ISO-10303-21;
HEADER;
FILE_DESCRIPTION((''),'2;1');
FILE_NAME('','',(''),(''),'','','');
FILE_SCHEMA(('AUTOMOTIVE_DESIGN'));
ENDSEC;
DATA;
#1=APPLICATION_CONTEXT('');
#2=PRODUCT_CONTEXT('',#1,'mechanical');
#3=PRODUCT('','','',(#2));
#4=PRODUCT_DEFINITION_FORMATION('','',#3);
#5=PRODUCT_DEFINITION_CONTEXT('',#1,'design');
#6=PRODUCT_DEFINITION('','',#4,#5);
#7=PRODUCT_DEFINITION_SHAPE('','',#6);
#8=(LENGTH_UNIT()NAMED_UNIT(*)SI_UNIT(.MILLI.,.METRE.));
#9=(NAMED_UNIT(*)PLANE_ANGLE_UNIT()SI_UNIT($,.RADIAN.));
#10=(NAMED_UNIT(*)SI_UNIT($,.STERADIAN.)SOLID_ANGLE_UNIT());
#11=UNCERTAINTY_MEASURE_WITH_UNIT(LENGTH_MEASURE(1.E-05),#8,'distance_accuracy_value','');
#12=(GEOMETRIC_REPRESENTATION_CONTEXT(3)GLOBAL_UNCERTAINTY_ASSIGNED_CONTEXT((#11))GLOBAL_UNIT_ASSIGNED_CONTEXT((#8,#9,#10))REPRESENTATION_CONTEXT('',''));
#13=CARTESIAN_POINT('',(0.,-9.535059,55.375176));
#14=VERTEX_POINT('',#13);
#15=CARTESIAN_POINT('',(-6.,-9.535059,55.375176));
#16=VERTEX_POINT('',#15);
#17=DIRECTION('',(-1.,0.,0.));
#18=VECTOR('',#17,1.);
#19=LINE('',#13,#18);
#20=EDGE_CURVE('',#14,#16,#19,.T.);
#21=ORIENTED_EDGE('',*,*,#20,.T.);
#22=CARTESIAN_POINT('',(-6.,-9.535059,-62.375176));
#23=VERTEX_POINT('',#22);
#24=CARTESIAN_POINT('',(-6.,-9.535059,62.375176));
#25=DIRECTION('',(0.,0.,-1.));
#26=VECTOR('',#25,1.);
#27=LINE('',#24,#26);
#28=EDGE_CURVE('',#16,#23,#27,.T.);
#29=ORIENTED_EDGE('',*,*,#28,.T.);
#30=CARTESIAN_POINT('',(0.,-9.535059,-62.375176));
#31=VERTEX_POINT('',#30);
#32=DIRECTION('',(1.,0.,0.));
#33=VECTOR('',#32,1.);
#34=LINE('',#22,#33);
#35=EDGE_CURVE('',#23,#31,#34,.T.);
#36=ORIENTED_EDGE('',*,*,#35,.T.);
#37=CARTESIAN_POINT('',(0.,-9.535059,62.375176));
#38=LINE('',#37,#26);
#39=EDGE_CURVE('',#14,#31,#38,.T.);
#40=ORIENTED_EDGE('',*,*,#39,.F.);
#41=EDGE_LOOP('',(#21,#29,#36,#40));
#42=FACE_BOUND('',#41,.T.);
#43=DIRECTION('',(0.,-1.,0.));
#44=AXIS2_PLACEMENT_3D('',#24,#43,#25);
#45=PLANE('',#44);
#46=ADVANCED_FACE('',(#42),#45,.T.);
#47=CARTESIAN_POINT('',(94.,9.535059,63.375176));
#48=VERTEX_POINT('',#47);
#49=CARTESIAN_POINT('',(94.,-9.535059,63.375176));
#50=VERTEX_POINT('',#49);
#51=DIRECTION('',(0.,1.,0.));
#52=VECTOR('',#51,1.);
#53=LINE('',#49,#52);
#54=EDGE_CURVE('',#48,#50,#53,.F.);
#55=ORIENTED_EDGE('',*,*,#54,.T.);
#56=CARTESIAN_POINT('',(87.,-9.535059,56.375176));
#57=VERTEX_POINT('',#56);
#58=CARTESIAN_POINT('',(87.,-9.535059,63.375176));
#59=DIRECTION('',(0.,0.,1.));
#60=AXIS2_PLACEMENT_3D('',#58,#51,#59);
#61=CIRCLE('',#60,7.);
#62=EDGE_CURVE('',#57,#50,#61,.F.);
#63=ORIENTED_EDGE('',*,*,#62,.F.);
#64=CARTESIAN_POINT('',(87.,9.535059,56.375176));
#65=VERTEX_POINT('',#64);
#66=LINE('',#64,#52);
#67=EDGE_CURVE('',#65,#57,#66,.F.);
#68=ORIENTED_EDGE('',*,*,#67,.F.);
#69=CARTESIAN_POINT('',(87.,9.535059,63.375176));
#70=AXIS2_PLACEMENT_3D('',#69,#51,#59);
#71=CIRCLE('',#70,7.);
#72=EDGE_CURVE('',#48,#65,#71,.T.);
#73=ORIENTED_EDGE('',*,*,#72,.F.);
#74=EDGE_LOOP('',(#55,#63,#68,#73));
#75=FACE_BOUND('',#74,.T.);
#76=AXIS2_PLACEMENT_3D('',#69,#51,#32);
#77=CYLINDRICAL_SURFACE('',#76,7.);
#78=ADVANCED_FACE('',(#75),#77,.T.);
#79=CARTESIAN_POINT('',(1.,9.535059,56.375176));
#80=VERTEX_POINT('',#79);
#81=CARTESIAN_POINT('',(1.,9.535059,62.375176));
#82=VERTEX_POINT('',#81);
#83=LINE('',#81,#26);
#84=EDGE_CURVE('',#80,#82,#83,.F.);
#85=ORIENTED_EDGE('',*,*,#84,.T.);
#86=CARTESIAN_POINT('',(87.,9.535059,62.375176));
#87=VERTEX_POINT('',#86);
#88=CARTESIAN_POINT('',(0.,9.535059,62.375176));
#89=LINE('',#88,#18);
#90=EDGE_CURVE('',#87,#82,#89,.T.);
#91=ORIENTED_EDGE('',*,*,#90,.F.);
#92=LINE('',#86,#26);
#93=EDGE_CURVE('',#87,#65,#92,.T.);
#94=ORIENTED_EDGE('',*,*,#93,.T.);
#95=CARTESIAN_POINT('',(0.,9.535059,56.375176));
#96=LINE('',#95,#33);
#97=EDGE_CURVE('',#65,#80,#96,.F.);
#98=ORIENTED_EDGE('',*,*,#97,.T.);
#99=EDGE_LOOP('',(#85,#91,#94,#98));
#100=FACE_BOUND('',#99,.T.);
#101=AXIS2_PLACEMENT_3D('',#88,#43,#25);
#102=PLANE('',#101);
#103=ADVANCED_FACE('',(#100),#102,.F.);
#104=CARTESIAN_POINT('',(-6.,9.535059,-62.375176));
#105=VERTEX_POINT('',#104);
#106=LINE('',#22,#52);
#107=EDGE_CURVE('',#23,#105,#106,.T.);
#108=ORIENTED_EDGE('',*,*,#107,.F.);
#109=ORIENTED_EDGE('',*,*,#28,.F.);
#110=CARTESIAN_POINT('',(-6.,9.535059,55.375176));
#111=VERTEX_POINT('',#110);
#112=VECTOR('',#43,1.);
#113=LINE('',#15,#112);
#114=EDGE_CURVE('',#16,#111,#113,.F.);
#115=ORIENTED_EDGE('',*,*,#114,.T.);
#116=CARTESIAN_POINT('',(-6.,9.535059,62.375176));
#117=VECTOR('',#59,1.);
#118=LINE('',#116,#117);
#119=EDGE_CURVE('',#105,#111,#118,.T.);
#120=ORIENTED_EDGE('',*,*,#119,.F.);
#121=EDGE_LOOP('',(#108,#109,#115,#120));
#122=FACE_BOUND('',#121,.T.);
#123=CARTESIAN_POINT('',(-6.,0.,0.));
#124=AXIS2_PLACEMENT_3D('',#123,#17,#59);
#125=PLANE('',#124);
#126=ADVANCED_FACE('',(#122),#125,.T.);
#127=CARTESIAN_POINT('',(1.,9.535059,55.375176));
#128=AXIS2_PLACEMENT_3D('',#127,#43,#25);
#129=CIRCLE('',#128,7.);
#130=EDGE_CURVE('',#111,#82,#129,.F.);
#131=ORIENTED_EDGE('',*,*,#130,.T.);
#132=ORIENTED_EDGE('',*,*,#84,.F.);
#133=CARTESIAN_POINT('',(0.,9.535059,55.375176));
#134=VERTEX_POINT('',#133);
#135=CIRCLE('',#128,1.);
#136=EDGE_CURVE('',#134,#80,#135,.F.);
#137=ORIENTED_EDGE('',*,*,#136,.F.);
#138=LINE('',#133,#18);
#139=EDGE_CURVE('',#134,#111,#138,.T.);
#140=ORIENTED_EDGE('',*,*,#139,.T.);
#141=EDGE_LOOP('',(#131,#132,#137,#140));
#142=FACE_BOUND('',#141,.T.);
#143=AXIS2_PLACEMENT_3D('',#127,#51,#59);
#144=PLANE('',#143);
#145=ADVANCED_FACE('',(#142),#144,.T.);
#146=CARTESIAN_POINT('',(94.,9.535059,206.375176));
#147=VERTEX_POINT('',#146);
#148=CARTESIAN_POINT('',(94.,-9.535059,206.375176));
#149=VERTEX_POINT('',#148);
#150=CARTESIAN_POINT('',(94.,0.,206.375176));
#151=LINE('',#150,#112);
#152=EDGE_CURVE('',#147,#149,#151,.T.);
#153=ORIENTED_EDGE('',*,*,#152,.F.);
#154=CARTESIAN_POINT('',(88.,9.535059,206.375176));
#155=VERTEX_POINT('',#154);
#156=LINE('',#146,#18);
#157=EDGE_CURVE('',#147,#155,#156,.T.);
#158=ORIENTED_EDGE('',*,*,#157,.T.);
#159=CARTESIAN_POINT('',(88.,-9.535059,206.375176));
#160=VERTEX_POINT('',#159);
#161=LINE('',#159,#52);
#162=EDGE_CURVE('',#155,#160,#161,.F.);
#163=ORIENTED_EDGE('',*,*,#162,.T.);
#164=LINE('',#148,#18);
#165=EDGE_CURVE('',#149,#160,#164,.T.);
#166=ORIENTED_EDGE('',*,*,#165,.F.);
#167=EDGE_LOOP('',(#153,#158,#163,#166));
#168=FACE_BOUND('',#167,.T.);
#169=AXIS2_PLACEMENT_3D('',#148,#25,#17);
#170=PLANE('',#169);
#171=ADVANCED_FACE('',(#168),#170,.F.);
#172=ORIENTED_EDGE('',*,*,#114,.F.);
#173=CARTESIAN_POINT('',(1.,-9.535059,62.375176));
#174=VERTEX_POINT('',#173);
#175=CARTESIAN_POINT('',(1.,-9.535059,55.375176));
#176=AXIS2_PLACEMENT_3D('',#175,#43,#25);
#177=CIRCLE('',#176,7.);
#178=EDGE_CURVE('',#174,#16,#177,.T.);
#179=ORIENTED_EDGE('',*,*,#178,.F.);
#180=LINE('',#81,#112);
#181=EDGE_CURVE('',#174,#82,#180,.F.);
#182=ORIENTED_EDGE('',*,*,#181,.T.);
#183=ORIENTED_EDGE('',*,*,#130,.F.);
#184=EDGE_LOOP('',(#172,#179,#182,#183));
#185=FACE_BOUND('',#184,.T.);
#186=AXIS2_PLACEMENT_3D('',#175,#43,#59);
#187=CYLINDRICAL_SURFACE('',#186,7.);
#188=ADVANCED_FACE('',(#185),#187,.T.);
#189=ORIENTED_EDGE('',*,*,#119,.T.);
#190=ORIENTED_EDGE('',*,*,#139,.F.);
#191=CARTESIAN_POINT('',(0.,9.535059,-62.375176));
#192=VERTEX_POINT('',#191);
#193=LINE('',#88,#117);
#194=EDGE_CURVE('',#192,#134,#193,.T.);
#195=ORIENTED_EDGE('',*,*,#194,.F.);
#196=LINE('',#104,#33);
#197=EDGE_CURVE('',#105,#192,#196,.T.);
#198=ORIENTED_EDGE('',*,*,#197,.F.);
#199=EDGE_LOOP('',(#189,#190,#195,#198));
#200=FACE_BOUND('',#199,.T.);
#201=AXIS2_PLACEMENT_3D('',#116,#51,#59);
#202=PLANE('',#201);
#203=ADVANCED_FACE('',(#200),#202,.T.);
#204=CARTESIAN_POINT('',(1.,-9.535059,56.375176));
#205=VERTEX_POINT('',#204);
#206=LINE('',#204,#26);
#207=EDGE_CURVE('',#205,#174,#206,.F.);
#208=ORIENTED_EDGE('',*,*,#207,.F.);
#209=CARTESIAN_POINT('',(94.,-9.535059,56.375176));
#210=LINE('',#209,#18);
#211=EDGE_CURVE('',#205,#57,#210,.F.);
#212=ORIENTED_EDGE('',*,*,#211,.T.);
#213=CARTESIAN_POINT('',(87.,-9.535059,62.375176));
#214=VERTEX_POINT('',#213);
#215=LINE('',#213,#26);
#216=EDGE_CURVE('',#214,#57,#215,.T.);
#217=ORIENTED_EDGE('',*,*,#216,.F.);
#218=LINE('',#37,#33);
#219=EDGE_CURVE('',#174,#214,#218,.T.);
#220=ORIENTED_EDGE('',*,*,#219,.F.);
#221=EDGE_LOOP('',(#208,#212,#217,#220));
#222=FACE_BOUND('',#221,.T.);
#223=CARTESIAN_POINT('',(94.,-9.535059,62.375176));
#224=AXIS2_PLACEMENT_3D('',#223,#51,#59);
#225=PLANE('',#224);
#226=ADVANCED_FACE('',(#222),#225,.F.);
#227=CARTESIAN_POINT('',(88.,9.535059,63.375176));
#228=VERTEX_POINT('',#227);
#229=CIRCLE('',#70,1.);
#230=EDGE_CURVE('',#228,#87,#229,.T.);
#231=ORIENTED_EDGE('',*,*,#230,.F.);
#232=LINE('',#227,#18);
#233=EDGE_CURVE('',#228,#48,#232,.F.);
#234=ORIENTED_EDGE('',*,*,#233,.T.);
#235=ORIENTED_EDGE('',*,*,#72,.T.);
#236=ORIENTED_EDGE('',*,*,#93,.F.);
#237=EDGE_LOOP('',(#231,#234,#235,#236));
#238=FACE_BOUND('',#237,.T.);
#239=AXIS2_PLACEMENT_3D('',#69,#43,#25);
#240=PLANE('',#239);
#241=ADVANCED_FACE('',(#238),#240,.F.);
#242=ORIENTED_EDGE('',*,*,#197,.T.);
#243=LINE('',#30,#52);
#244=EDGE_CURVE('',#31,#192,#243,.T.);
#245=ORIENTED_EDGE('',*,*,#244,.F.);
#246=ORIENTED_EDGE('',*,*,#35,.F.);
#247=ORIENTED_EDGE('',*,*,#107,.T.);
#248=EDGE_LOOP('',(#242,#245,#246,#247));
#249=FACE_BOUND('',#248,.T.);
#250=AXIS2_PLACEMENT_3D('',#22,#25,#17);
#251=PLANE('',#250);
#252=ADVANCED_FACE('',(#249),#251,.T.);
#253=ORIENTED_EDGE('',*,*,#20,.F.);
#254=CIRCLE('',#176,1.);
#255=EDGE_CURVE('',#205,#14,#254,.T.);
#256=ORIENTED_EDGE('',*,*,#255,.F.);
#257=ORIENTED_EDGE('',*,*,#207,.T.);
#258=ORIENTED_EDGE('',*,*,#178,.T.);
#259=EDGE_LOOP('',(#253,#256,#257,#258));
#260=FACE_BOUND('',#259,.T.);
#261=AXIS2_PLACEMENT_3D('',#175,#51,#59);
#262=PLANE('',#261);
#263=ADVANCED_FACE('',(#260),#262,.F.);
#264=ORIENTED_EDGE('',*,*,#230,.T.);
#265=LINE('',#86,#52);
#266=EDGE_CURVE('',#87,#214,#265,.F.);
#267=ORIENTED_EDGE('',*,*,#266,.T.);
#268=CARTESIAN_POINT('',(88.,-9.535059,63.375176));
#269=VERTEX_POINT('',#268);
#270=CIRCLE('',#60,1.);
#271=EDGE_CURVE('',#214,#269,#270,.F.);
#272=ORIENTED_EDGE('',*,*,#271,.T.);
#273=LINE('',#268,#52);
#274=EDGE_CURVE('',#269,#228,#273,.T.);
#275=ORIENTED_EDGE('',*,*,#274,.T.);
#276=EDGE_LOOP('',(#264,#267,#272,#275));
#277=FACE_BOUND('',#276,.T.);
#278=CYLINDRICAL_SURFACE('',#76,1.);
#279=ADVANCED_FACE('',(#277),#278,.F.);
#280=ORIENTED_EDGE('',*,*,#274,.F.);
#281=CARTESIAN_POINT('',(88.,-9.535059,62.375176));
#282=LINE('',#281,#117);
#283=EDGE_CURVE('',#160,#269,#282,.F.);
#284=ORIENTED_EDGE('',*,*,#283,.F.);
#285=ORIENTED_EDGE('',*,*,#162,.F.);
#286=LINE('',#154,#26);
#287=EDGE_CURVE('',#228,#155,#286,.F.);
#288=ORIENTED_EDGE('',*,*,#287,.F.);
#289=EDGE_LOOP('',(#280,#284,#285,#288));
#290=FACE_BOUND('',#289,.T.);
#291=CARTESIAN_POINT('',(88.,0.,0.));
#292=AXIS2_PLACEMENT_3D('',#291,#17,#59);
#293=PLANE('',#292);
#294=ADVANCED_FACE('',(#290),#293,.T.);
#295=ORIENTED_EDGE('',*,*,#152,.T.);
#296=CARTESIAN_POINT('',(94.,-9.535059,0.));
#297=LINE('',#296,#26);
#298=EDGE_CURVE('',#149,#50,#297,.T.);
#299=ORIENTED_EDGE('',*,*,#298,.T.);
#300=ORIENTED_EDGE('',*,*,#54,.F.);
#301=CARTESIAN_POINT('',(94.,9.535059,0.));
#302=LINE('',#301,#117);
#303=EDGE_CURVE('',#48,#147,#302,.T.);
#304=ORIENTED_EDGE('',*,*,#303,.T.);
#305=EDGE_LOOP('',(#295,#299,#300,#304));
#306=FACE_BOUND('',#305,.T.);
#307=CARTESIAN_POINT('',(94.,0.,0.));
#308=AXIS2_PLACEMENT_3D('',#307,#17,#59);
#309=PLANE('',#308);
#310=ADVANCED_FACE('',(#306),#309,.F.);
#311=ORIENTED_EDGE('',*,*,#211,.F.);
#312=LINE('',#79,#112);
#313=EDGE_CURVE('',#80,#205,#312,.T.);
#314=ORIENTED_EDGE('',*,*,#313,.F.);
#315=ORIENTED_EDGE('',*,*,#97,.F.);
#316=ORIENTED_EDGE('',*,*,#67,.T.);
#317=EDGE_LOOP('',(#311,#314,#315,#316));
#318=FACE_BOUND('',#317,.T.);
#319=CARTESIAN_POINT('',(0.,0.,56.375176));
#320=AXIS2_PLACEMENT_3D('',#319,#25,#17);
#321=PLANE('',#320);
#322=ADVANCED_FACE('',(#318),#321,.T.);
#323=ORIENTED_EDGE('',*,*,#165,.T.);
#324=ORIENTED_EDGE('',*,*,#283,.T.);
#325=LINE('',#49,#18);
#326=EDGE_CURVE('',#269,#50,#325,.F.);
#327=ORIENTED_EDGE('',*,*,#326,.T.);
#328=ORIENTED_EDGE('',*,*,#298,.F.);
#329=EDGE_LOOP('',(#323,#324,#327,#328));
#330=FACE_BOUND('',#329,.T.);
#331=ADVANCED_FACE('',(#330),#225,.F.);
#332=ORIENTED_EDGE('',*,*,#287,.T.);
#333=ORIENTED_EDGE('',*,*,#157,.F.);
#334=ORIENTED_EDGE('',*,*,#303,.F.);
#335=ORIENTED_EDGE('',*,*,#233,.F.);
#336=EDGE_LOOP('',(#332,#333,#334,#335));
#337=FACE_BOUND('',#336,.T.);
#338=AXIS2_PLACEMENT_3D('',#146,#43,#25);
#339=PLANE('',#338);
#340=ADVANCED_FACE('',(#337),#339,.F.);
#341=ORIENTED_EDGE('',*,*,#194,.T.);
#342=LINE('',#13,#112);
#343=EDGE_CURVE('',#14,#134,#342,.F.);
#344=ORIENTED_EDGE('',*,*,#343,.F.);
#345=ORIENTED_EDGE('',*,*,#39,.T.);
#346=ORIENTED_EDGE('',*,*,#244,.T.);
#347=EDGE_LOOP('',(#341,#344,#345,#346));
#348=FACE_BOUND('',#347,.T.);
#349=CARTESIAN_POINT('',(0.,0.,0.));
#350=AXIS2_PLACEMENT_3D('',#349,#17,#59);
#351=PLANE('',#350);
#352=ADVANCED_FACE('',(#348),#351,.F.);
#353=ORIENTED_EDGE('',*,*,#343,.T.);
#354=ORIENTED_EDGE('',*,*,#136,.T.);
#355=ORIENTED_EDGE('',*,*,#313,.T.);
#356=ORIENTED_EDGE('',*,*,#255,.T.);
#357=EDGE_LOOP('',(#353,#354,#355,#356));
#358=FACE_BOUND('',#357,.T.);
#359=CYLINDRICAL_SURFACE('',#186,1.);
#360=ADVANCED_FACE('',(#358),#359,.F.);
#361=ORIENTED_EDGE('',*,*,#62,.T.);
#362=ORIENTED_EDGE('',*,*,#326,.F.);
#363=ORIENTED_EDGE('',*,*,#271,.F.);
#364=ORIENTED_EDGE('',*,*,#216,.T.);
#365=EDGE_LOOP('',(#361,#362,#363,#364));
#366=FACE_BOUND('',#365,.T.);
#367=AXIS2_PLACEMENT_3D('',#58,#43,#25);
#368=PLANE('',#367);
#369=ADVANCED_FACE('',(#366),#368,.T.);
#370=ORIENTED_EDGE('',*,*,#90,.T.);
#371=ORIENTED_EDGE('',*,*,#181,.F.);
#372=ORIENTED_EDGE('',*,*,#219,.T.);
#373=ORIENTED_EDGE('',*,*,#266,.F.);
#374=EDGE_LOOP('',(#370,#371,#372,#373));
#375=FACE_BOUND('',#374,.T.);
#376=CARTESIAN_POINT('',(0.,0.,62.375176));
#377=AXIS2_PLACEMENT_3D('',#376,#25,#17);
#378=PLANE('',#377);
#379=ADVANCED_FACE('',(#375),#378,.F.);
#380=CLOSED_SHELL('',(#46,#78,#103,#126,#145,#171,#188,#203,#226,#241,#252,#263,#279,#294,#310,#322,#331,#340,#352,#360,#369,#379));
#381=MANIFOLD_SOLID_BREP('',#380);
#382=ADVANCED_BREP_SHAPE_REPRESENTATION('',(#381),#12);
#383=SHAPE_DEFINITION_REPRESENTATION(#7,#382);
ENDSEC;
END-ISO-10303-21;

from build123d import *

# Parameters (mm, degrees)
SKETCH1_W                    = 124.750351958
SKETCH1_H                    = 19.070117496
BASE_FLANGE1_DEPTH           = 6
EDGE_FLANGE1_STRIP_W         = 26
EDGE_FLANGE1_STRIP_H         = 6
EDGE_FLANGE1_STRIP_CUT_DEPTH = 19.070117497
EDGE_FLANGE1_DEPTH           = 19.070117497
EDGE_FLANGE2_STRIP_W         = 26
EDGE_FLANGE2_STRIP_H         = 6
EDGE_FLANGE2_STRIP_CUT_DEPTH = 19.070117497
EDGE_FLANGE2_DEPTH           = 19.070117497


# Sheet-metal steps are written as plain solids
with BuildPart() as part:
    # Sketch1 → Base-Flange1 (new body)
    with BuildSketch(Plane(origin=(0, 0, 0), x_dir=(0, 0, -1), z_dir=(1, 0, 0))):
        Rectangle(SKETCH1_W, SKETCH1_H)
    extrude(amount=-BASE_FLANGE1_DEPTH)

    # Edge-Flange1 strip (across the edge) → Edge-Flange1 strip cut (cut)
    with BuildSketch(Plane(origin=(0, 9.535058748, 62.375175979), x_dir=(0, 0, -1), z_dir=(0, -1, 0))):
        with Locations((-6, -3)):
            Rectangle(EDGE_FLANGE1_STRIP_W, EDGE_FLANGE1_STRIP_H)
    extrude(amount=EDGE_FLANGE1_STRIP_CUT_DEPTH, mode=Mode.SUBTRACT)

    # Edge-Flange1 section (across the edge) → Edge-Flange1 (add)
    with BuildSketch(Plane(origin=(0, 9.535058748, 62.375175979), x_dir=(0, 0, -1), z_dir=(0, -1, 0))):
        with BuildLine():
            Line((0, 1), (0, 94))
            Line((0, 94), (6, 94))
            Line((6, 94), (6, 1))
            ThreePointArc((6, 1), (6.292893219, 0.292893219), (7, 0))
            Line((7, 0), (7, -6))
            ThreePointArc((7, -6), (2.050252532, -3.949747468), (0, 1))
        make_face()
    extrude(amount=EDGE_FLANGE1_DEPTH)

    # Edge-Flange2 strip (across the edge) → Edge-Flange2 strip cut (cut)
    with BuildSketch(Plane(origin=(94, -9.535058748, 62.375175979), x_dir=(-1, 0, 0), z_dir=(0, 1, 0))):
        with Locations((-6, -3)):
            Rectangle(EDGE_FLANGE2_STRIP_W, EDGE_FLANGE2_STRIP_H)
    extrude(amount=EDGE_FLANGE2_STRIP_CUT_DEPTH, mode=Mode.SUBTRACT)

    # Edge-Flange2 section (across the edge) → Edge-Flange2 (add)
    with BuildSketch(Plane(origin=(94, -9.535058748, 62.375175979), x_dir=(-1, 0, 0), z_dir=(0, 1, 0))):
        with BuildLine():
            Line((0, 1), (0, 144))
            Line((0, 144), (6, 144))
            Line((6, 144), (6, 1))
            ThreePointArc((6, 1), (6.292893219, 0.292893219), (7, 0))
            Line((7, 0), (7, -6))
            ThreePointArc((7, -6), (2.050252532, -3.949747468), (0, 1))
        make_face()
    extrude(amount=EDGE_FLANGE2_DEPTH)


solid = part.part
